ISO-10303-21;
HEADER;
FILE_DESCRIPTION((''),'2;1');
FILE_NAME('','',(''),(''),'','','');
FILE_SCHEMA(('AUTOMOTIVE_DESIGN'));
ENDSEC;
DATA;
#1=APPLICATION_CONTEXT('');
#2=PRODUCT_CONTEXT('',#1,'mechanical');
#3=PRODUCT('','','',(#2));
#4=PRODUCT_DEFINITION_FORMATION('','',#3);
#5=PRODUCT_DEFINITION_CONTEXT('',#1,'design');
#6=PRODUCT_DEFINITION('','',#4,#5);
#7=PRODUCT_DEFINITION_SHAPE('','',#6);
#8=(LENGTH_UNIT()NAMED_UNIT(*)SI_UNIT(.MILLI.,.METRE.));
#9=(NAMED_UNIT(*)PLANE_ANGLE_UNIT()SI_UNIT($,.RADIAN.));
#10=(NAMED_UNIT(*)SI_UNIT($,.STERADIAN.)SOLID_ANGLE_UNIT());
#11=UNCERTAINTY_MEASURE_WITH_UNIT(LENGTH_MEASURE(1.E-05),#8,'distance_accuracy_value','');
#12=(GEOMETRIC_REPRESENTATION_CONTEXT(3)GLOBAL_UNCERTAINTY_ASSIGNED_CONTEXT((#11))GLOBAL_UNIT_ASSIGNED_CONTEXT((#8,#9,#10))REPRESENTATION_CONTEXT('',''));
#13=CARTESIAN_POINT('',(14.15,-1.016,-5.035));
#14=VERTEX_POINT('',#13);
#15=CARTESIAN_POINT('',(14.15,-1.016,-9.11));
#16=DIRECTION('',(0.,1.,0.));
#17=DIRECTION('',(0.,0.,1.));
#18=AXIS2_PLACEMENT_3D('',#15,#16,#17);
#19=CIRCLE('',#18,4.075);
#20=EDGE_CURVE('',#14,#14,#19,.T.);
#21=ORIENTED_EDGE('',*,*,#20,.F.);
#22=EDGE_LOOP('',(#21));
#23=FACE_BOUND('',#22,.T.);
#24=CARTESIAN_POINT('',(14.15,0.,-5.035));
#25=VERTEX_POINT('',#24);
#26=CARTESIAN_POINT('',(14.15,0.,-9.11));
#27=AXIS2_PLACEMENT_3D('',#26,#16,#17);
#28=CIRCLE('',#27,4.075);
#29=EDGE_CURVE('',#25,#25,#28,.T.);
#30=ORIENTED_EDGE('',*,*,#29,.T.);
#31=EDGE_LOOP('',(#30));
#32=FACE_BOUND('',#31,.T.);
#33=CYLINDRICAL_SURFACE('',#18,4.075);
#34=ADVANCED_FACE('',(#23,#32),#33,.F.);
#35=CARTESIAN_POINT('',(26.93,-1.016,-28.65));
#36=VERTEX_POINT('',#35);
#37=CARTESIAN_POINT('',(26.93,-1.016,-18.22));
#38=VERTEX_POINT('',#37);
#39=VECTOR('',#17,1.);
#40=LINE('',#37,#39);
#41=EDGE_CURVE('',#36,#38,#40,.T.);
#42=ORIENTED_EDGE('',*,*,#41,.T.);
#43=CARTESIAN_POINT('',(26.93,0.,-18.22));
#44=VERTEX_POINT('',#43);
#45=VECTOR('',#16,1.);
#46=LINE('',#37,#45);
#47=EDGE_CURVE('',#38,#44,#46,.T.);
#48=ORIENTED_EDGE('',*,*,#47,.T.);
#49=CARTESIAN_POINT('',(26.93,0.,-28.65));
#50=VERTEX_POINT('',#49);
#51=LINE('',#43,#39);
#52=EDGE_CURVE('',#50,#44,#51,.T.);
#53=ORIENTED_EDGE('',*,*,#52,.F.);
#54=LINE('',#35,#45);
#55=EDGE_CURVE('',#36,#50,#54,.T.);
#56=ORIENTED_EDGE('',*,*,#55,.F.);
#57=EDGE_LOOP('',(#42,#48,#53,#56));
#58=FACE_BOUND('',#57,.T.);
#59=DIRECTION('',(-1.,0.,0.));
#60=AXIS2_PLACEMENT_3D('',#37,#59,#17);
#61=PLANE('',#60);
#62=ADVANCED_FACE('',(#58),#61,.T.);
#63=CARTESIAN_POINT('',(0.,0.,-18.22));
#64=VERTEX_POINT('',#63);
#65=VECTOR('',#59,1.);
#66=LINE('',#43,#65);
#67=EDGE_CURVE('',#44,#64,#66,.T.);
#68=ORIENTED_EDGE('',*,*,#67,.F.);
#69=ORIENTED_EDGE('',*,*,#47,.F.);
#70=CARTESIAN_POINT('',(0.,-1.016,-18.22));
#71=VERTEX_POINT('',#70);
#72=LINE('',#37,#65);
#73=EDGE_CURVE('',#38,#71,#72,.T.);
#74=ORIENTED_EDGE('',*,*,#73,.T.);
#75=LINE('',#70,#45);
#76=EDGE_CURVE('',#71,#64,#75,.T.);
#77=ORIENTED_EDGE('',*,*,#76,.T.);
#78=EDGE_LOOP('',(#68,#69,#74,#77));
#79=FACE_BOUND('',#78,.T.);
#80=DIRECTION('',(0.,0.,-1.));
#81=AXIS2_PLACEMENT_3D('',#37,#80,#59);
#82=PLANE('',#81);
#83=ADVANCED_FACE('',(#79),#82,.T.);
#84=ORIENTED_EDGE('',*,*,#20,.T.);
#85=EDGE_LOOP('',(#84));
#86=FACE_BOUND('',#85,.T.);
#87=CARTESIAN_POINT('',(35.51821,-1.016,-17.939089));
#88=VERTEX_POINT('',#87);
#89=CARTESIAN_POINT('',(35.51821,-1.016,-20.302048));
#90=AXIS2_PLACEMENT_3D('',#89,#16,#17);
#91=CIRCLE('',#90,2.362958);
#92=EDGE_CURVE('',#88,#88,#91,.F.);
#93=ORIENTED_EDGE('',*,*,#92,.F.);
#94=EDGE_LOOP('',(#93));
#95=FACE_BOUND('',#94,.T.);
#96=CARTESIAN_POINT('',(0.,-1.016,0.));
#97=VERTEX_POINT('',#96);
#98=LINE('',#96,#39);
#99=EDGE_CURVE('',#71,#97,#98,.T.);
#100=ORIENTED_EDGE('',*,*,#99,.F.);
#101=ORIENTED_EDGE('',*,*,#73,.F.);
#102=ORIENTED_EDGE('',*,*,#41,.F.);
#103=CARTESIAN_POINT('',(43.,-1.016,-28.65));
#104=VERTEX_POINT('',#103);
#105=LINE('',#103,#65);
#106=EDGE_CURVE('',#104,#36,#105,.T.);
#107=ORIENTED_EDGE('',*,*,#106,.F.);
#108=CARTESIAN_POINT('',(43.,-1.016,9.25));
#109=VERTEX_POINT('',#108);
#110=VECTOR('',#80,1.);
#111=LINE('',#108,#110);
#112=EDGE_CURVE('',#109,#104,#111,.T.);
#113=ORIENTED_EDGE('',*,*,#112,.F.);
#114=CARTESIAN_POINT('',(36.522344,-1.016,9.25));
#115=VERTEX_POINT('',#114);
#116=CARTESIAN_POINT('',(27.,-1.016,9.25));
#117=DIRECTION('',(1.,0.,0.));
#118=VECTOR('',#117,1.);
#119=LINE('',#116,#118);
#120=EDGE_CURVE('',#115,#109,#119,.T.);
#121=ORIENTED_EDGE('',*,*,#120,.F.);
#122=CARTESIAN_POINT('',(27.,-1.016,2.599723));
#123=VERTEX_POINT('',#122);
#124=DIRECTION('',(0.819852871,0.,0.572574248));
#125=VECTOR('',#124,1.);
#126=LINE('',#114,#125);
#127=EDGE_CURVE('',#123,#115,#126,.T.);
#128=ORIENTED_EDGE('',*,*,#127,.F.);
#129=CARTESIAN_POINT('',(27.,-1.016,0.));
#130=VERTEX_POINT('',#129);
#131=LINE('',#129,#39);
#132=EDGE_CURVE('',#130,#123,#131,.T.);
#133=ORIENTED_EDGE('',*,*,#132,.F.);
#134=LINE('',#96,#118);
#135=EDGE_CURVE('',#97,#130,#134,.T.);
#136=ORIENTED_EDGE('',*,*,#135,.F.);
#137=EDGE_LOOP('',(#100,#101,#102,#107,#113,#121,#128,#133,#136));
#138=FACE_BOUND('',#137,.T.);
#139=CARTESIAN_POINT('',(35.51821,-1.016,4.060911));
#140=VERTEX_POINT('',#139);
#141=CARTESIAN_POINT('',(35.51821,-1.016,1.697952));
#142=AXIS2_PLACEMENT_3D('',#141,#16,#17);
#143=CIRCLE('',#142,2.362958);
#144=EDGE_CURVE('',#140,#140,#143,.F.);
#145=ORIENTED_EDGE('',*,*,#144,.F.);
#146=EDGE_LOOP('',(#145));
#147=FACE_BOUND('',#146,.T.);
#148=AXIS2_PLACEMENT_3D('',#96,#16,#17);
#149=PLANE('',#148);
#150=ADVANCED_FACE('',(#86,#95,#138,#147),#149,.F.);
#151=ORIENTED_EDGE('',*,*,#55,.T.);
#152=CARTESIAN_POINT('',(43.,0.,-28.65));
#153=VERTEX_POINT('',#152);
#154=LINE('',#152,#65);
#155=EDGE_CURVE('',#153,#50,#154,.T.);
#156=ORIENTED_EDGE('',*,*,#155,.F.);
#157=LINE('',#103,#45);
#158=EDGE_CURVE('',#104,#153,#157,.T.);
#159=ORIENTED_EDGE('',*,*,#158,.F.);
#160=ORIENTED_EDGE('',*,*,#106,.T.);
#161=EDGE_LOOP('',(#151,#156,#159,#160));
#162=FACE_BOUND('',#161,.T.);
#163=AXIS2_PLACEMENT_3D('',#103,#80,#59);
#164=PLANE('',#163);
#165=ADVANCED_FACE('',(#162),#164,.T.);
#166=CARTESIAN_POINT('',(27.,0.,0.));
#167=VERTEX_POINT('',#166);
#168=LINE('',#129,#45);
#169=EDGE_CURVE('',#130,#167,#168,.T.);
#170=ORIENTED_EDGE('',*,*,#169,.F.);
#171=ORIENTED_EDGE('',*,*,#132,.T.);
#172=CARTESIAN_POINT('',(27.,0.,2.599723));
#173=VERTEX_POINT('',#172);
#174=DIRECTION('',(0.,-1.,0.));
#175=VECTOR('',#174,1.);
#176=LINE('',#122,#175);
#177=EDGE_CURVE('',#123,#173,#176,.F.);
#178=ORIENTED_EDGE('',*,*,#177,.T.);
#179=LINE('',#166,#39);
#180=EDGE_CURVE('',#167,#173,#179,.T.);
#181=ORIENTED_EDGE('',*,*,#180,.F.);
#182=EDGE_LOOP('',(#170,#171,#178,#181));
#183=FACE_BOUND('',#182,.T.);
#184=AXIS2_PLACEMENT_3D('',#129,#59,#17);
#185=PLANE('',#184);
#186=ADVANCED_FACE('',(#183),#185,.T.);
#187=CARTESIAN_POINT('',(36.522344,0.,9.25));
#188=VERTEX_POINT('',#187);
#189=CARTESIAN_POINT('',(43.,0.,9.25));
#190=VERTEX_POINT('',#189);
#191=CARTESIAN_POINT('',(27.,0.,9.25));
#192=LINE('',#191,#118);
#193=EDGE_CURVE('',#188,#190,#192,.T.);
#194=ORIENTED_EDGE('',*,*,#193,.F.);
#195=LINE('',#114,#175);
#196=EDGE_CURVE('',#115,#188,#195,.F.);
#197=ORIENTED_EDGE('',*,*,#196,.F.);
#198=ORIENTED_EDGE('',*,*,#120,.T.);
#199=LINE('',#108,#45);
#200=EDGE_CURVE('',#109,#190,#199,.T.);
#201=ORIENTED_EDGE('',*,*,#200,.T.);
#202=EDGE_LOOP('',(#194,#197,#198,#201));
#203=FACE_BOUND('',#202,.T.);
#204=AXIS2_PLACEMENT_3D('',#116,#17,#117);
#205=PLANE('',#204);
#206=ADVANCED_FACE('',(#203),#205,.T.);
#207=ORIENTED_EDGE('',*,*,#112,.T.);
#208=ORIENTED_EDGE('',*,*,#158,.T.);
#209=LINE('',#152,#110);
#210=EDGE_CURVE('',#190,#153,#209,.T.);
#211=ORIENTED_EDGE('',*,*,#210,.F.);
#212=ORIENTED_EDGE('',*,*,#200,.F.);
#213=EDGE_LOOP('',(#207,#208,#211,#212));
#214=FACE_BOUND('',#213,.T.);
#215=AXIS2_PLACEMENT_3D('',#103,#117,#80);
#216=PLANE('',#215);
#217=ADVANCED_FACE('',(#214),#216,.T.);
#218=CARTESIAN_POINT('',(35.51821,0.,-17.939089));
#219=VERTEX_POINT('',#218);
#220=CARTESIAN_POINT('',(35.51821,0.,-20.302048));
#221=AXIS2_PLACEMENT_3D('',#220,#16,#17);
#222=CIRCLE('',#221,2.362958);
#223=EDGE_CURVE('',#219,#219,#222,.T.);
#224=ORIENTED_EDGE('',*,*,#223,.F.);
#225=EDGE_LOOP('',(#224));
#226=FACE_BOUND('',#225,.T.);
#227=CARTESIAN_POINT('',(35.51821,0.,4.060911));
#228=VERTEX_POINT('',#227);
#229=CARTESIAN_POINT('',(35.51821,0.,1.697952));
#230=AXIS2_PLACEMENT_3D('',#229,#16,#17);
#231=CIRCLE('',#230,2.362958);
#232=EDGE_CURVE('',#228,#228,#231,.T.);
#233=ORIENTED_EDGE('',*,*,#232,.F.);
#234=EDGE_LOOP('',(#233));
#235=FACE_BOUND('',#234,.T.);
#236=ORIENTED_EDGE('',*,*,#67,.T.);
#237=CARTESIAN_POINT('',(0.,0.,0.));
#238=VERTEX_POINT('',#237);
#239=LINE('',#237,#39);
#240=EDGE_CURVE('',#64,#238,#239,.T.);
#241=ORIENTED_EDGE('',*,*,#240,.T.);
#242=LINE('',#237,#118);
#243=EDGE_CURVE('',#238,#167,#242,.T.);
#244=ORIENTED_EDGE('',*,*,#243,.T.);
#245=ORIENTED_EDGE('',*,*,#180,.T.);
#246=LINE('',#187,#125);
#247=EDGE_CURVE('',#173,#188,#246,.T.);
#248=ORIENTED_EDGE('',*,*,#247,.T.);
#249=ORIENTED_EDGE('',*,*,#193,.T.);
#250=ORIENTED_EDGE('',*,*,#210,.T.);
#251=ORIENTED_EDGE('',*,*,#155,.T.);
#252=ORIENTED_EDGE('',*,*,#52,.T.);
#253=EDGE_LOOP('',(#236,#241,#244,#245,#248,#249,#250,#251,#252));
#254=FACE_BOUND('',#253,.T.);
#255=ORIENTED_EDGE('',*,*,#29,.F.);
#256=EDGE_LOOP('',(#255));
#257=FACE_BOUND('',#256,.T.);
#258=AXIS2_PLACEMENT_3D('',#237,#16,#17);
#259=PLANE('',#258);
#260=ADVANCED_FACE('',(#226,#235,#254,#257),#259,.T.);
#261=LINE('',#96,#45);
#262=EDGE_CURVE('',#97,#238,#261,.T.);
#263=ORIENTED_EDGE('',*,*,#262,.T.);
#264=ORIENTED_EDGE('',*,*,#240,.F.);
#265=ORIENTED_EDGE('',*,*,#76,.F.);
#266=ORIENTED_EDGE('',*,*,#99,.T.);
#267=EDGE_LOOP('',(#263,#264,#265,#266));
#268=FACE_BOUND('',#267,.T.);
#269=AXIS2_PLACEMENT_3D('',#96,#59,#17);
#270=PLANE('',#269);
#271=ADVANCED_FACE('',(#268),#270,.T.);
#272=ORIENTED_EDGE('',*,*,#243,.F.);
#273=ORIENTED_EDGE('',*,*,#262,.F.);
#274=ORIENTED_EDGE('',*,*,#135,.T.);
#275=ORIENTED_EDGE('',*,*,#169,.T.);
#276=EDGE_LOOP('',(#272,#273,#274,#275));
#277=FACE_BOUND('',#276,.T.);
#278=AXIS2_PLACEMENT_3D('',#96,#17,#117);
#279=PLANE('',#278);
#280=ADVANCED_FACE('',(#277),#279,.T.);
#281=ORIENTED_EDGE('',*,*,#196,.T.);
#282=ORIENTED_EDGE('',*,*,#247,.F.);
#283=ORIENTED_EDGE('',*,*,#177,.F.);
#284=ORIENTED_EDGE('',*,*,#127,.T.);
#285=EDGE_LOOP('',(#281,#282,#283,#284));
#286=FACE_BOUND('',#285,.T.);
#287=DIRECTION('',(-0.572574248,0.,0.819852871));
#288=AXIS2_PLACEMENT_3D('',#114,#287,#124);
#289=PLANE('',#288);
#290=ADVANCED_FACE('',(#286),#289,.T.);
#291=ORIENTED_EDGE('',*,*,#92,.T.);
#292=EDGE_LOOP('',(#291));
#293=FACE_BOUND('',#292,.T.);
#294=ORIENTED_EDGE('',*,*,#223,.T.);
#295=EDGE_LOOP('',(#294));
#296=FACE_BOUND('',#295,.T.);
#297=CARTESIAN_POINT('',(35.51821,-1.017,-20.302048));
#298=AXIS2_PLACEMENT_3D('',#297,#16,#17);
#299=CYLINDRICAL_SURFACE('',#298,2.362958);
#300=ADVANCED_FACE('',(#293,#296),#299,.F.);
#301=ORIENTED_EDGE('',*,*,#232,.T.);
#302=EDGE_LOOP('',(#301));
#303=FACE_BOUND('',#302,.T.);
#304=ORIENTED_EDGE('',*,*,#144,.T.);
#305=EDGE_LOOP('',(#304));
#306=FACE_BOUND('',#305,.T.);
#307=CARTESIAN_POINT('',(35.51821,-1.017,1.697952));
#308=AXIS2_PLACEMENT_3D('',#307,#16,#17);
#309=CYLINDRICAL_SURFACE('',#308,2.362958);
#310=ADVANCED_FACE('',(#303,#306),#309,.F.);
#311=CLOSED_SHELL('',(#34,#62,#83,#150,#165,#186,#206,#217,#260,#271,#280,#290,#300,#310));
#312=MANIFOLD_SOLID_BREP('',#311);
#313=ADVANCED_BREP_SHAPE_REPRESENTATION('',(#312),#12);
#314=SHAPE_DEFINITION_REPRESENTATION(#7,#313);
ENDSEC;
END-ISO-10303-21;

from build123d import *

# Parameters (mm, degrees)
BASE_FLANGE1_DEPTH = 1.016
SKETCH6_R          = 4.075
CUT_EXTRUDE1_DEPTH = 52.680313041
CUT_EXTRUDE2_REACH = 53.68
CUT_EXTRUDE3_REACH = 53.68
SKETCH8_R          = 2.36295848


# Sheet-metal steps are written as plain solids
with BuildPart() as part:
    # Sketch1 → Base-Flange1 (new body)
    with BuildSketch(Plane(origin=(0, 0, 0), x_dir=(1, 0, 0), z_dir=(0, 1, 0))):
        Polygon((27, 0), (27, -9.25), (43, -9.25), (43, -1.78), (43, 18.22), (43, 28.65), (26.93, 28.65), (26.93, 18.22), (0, 18.22), (0, 0), align=None)
    extrude(amount=-BASE_FLANGE1_DEPTH)

    # Sketch6 → Cut-Extrude1 (cut, through all)
    with BuildSketch(Plane(origin=(0, 0, 0), x_dir=(1, 0, 0), z_dir=(0, 1, 0))):
        with Locations(Location((14.15, 9.11, 0), (0, 0, 270))):
            Circle(SKETCH6_R)
    extrude(amount=-CUT_EXTRUDE1_DEPTH, mode=Mode.SUBTRACT)

    # Sketch7 → Cut-Extrude2 (cut, up to next)
    with BuildSketch(Plane(origin=(0, 0, 0), x_dir=(1, 0, 0), z_dir=(0, 1, 0)), mode=Mode.PRIVATE) as cut_extrude2_sk1:
        Polygon((36.522343865, -9.25), (27, -2.599722771), (27, -9.25), align=None)
    cut_extrude2_tool1 = extrude(cut_extrude2_sk1.sketch, amount=-CUT_EXTRUDE2_REACH, mode=Mode.PRIVATE) & part.part
    add(cut_extrude2_tool1.solids().sort_by_distance((30.174115, 0, 7.033241))[0], mode=Mode.SUBTRACT)

    # Sketch8 → Cut-Extrude3 (cut, up to next)
    with BuildSketch(Plane(origin=(0, 0, 0), x_dir=(1, 0, 0), z_dir=(0, 1, 0)), mode=Mode.PRIVATE) as cut_extrude3_sk1:
        with Locations(Location((35.518210435, -1.697952117, 0), (0, 0, 270))):
            Circle(SKETCH8_R)
    cut_extrude3_tool1 = extrude(cut_extrude3_sk1.sketch, amount=-CUT_EXTRUDE3_REACH, mode=Mode.PRIVATE) & part.part
    # Sketch8 → Cut-Extrude3 (cut, up to next)
    with BuildSketch(Plane(origin=(0, 0, 0), x_dir=(1, 0, 0), z_dir=(0, 1, 0)), mode=Mode.PRIVATE) as cut_extrude3_sk2:
        with Locations(Location((35.518210435, 20.302047883, 0), (0, 0, 270))):
            Circle(SKETCH8_R)
    cut_extrude3_tool2 = extrude(cut_extrude3_sk2.sketch, amount=-CUT_EXTRUDE3_REACH, mode=Mode.PRIVATE) & part.part
    add(cut_extrude3_tool1.solids().sort_by_distance((35.51821, 0, 1.697952))[0], mode=Mode.SUBTRACT)
    add(cut_extrude3_tool2.solids().sort_by_distance((35.51821, 0, -20.302048))[0], mode=Mode.SUBTRACT)


solid = part.part
